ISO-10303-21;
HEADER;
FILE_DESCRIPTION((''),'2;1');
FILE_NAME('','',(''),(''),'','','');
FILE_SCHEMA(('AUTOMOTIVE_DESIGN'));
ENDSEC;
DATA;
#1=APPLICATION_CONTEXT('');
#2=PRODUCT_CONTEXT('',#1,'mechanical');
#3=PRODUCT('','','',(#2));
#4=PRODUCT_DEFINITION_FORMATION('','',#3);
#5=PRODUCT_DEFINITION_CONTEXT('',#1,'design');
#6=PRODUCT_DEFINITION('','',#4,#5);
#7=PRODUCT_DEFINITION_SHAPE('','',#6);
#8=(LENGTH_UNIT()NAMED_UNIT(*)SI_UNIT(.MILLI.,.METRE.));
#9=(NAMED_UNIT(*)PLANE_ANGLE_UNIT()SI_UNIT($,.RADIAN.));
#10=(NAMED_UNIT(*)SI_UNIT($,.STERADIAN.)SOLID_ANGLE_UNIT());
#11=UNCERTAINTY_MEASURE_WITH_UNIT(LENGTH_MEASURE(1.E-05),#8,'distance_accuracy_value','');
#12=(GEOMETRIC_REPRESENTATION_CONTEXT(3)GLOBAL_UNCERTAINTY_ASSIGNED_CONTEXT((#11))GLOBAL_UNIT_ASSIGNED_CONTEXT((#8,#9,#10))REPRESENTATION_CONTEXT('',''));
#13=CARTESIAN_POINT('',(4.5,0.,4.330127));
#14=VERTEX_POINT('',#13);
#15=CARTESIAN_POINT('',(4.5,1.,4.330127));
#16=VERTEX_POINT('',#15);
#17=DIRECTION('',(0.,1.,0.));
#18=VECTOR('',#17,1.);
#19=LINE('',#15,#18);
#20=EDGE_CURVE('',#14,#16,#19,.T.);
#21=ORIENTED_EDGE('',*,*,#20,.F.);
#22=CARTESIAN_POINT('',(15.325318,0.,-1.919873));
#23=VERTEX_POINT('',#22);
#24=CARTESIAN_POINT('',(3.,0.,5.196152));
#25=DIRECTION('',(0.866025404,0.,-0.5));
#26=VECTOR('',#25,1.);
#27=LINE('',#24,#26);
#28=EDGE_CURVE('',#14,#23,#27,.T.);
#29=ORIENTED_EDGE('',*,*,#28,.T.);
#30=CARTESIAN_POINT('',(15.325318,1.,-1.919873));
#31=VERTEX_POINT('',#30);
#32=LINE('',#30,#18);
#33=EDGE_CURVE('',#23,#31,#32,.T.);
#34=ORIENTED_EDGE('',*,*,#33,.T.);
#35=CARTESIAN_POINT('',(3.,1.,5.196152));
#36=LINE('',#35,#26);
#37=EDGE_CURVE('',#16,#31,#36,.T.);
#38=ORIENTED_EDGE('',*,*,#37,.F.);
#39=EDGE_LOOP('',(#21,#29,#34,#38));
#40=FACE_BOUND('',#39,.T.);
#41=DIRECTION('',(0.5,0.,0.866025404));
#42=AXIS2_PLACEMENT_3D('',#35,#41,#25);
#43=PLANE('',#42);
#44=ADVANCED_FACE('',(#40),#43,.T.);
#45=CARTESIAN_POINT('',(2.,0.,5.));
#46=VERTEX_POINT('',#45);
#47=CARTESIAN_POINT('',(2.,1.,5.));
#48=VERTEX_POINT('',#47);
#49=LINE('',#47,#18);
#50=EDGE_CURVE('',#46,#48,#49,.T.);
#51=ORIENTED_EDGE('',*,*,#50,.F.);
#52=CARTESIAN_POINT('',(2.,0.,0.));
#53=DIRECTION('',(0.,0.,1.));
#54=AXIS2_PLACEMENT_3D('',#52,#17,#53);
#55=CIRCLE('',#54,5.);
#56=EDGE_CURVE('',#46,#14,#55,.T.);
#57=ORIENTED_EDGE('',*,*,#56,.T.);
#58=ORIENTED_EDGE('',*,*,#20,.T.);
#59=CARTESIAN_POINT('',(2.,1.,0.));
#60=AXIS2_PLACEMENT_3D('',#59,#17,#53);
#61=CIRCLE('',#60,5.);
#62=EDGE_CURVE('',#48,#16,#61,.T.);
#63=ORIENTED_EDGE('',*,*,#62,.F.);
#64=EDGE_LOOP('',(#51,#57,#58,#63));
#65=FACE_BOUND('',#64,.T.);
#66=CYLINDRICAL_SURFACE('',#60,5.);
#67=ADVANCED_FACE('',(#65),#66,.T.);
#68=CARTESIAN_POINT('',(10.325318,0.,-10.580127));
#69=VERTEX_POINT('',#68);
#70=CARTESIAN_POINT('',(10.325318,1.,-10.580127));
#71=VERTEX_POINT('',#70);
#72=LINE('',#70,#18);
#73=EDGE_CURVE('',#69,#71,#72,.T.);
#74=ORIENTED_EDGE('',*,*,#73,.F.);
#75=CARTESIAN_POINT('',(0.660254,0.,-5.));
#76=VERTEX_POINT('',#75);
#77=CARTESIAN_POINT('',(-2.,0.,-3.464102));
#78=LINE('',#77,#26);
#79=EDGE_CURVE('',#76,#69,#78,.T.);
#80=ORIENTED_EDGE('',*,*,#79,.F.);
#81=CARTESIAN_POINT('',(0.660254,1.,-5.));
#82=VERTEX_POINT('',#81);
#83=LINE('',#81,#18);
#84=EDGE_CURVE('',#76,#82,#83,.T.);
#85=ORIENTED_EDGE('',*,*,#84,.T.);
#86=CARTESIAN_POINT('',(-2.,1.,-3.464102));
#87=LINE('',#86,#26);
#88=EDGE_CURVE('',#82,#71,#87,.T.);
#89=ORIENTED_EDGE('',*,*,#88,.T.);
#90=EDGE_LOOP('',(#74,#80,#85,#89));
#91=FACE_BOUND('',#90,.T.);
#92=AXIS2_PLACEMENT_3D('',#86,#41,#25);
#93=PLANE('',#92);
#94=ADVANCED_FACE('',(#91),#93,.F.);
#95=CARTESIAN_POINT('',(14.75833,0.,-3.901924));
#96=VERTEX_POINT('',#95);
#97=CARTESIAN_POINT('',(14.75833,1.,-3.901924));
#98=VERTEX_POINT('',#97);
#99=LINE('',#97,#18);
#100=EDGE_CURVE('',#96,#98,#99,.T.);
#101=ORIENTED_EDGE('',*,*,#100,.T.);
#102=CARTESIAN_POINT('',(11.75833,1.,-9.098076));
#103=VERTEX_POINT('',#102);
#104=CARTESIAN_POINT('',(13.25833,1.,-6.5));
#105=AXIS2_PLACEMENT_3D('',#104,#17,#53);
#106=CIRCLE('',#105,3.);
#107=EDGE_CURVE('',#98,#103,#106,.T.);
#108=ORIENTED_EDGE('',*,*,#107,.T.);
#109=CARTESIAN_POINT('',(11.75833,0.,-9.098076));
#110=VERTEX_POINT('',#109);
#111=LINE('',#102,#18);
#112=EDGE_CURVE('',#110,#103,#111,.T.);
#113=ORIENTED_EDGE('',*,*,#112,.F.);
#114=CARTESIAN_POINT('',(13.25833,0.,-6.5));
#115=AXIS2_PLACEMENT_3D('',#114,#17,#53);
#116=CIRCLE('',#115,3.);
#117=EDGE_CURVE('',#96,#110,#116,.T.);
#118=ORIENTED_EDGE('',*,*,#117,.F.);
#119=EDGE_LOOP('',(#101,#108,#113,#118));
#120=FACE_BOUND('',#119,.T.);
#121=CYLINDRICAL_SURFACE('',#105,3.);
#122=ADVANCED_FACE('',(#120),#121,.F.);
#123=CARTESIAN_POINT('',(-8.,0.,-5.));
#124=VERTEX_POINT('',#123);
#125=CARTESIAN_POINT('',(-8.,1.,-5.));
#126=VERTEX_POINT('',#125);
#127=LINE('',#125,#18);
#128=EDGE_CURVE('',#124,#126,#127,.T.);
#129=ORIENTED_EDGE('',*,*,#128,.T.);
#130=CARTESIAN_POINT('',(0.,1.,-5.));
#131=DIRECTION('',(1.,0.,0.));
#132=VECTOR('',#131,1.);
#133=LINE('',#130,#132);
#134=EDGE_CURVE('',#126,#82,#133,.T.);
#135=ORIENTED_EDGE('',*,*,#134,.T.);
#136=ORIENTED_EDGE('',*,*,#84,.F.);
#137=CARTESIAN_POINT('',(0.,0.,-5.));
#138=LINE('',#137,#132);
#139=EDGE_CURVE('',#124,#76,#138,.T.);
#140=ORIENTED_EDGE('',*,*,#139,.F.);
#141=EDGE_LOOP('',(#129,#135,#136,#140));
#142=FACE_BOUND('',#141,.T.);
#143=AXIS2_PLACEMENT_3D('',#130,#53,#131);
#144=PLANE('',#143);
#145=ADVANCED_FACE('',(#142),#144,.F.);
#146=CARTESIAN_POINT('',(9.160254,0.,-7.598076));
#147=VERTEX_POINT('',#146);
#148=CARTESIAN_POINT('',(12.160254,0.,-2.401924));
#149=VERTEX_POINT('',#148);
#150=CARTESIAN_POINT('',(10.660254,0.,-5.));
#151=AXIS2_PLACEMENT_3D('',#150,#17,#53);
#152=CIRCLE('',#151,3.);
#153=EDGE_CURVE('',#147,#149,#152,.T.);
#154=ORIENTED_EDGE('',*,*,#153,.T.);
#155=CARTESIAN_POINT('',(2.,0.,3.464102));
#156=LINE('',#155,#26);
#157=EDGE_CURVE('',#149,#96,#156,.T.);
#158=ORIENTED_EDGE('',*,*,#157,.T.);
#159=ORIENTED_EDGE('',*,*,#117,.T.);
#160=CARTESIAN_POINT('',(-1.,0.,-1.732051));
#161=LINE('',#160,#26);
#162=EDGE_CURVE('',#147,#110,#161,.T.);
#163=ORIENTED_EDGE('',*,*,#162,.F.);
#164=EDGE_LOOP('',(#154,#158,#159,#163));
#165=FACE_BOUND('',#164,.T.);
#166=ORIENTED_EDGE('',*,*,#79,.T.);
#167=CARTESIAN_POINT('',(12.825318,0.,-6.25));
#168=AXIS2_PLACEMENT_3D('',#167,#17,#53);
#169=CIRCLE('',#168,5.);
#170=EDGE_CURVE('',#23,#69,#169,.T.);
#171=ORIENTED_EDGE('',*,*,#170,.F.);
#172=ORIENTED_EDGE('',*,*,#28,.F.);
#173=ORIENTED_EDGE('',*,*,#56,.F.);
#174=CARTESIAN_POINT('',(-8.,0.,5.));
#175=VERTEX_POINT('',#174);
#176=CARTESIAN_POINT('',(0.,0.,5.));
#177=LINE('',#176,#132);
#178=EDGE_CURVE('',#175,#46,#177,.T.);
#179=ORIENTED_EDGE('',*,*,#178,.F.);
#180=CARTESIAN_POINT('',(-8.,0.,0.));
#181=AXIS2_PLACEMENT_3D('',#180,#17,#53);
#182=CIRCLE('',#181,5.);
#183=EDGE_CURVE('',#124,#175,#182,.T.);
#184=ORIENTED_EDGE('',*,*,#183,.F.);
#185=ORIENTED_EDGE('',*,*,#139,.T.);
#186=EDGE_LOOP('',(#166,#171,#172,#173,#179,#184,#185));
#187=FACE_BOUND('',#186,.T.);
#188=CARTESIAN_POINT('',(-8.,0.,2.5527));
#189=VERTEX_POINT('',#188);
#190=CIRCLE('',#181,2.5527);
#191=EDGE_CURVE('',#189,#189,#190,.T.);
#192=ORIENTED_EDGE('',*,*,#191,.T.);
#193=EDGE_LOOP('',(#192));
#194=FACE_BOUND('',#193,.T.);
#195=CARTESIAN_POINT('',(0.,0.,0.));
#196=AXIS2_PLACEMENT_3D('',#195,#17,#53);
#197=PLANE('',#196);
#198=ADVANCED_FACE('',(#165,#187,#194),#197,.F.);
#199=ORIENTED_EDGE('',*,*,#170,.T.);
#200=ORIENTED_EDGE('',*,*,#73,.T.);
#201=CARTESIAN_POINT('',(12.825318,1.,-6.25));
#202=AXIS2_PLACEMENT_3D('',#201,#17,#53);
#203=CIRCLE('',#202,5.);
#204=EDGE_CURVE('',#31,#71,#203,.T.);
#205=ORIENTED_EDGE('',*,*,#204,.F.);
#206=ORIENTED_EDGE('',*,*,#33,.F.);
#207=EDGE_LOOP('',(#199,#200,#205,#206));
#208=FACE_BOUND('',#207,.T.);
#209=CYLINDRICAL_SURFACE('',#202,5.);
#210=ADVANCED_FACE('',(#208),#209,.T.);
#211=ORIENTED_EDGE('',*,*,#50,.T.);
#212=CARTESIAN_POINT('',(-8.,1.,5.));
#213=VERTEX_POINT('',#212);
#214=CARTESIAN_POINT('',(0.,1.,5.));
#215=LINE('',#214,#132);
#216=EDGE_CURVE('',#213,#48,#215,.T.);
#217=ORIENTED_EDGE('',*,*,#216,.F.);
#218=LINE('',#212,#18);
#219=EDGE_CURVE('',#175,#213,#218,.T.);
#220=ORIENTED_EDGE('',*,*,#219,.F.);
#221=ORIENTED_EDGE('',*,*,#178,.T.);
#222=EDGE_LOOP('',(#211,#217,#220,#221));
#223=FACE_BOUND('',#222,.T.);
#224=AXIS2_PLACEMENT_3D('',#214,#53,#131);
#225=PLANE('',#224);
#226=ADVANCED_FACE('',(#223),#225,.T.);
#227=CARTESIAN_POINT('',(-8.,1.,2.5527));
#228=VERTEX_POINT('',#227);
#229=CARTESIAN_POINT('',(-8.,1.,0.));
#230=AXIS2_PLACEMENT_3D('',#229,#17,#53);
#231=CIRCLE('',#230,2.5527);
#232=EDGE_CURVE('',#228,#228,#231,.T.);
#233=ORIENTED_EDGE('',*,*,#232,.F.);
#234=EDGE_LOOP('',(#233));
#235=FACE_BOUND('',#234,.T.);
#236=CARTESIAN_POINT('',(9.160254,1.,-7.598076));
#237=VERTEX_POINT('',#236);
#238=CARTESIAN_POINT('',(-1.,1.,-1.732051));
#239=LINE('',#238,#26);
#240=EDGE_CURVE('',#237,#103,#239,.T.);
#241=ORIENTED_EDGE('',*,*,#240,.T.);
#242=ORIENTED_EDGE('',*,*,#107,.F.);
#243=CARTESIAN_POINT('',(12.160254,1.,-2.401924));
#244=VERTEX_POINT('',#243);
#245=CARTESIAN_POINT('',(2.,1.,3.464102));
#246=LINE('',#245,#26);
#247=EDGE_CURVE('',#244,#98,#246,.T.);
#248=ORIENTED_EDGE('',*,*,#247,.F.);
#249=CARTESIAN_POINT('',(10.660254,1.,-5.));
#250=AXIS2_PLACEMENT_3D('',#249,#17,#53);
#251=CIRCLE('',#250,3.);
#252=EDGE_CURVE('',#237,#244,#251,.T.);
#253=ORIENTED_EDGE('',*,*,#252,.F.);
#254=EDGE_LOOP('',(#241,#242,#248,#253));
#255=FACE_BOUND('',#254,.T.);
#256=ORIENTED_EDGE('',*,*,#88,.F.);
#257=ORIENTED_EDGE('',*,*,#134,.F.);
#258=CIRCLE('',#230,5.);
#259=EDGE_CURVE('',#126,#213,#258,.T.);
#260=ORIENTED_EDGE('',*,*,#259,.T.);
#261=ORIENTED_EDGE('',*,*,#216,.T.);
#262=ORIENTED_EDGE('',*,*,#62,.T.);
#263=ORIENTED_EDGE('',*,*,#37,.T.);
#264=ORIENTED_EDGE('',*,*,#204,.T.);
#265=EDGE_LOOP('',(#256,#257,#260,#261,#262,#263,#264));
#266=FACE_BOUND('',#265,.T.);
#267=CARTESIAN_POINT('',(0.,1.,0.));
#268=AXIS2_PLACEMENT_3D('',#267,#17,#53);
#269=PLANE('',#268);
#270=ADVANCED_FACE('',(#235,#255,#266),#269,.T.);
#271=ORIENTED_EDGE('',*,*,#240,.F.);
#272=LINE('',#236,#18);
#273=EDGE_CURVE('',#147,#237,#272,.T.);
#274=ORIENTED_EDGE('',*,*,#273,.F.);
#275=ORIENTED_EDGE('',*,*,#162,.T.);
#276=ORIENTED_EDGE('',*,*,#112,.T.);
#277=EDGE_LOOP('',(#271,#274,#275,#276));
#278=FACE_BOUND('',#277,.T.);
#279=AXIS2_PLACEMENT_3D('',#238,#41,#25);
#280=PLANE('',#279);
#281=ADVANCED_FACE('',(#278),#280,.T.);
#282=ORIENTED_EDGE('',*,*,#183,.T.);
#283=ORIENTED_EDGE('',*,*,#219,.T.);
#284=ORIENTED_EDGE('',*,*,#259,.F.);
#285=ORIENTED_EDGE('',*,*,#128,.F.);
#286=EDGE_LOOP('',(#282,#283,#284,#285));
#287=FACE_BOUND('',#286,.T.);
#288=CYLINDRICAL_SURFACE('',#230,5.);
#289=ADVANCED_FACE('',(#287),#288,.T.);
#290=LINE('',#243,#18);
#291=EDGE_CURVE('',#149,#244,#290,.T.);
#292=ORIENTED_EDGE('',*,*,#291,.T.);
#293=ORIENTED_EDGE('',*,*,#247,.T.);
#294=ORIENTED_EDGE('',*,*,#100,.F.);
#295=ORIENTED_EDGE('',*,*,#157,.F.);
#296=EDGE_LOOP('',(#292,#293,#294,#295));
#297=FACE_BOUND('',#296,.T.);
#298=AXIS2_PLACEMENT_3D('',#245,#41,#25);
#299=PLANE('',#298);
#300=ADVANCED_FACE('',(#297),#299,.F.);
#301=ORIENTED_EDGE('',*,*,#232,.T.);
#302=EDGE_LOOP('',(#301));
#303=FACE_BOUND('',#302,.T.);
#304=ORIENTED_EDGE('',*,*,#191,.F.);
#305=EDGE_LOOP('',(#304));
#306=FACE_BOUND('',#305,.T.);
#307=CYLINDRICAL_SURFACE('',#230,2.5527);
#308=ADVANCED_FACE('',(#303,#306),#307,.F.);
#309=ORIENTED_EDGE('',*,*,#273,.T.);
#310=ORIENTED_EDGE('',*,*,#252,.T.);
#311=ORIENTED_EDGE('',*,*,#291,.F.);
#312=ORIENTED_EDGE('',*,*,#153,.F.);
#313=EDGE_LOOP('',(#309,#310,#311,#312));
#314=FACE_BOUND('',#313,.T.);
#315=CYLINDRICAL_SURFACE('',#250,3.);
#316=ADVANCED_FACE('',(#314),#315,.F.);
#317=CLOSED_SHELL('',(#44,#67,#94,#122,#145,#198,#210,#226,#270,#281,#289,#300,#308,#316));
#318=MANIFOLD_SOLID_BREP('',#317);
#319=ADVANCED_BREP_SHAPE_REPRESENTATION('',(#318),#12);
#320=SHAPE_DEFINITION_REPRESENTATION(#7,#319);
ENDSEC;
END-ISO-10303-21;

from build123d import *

# Parameters (mm, degrees)
BOSS_EXTRUDE1_DEPTH    = 1
F_10_CLEARANCE_HOLE1_D = 5.1054


with BuildPart() as part:
    # Sketch1 → Boss-Extrude1 (new body)
    # profile 1 of 3: a face of its own
    with BuildSketch(Plane(origin=(0, 0, 0), x_dir=(1, 0, 0), z_dir=(0, 1, 0))):
        with BuildLine():
            Line((0.660254038, 5), (-8, 5))
            ThreePointArc((-8, 5), (-13, 0), (-8, -5))
            Line((-8, -5), (2, -5))
            ThreePointArc((2, -5), (-2.829629131, -1.294095226), (-0.5, 4.330127019))
            Line((-0.5, 4.330127019), (0.660254038, 5))
        make_face()
    # profile 2 of 3: a face of its own
    with BuildSketch(Plane(origin=(0, 0, 0), x_dir=(1, 0, 0), z_dir=(0, 1, 0))):
        with BuildLine():
            Line((2, 5), (0.660254038, 5))
            Line((0.660254038, 5), (-0.5, 4.330127019))
            ThreePointArc((-0.5, 4.330127019), (-2.829629131, -1.294095226), (2, -5))
            ThreePointArc((2, -5), (3.294095226, -4.829629131), (4.5, -4.330127019))
            ThreePointArc((4.5, -4.330127019), (6.829629131, 1.294095226), (2, 5))
        make_face()
    # profile 3 of 3: a face of its own
    with BuildSketch(Plane(origin=(0, 0, 0), x_dir=(1, 0, 0), z_dir=(0, 1, 0))):
        with BuildLine():
            Line((10.325317547, 10.580127019), (0.660254038, 5))
            Line((0.660254038, 5), (2, 5))
            ThreePointArc((2, 5), (6.829629131, 1.294095226), (4.5, -4.330127019))
            Line((4.5, -4.330127019), (15.325317547, 1.919872981))
            ThreePointArc((15.325317547, 1.919872981), (17.155444566, 8.75), (10.325317547, 10.580127019))
        make_face()
        with BuildLine():
            ThreePointArc((12.160254038, 2.401923789), (8.062177826, 3.5), (9.160254038, 7.598076211))
            Line((9.160254038, 7.598076211), (11.758330249, 9.098076211))
            ThreePointArc((11.758330249, 9.098076211), (15.856406461, 8), (14.758330249, 3.901923789))
            Line((14.758330249, 3.901923789), (12.160254038, 2.401923789))
        make_face(mode=Mode.SUBTRACT)
    extrude(amount=BOSS_EXTRUDE1_DEPTH)

    # #10 Clearance Hole1 (through all)
    with Locations(Plane(origin=(0, 1, 0), x_dir=(1, 0, 0), z_dir=(0, 1, 0))):
        with Locations((-8, 0)):
            Hole(F_10_CLEARANCE_HOLE1_D / 2)


solid = part.part
